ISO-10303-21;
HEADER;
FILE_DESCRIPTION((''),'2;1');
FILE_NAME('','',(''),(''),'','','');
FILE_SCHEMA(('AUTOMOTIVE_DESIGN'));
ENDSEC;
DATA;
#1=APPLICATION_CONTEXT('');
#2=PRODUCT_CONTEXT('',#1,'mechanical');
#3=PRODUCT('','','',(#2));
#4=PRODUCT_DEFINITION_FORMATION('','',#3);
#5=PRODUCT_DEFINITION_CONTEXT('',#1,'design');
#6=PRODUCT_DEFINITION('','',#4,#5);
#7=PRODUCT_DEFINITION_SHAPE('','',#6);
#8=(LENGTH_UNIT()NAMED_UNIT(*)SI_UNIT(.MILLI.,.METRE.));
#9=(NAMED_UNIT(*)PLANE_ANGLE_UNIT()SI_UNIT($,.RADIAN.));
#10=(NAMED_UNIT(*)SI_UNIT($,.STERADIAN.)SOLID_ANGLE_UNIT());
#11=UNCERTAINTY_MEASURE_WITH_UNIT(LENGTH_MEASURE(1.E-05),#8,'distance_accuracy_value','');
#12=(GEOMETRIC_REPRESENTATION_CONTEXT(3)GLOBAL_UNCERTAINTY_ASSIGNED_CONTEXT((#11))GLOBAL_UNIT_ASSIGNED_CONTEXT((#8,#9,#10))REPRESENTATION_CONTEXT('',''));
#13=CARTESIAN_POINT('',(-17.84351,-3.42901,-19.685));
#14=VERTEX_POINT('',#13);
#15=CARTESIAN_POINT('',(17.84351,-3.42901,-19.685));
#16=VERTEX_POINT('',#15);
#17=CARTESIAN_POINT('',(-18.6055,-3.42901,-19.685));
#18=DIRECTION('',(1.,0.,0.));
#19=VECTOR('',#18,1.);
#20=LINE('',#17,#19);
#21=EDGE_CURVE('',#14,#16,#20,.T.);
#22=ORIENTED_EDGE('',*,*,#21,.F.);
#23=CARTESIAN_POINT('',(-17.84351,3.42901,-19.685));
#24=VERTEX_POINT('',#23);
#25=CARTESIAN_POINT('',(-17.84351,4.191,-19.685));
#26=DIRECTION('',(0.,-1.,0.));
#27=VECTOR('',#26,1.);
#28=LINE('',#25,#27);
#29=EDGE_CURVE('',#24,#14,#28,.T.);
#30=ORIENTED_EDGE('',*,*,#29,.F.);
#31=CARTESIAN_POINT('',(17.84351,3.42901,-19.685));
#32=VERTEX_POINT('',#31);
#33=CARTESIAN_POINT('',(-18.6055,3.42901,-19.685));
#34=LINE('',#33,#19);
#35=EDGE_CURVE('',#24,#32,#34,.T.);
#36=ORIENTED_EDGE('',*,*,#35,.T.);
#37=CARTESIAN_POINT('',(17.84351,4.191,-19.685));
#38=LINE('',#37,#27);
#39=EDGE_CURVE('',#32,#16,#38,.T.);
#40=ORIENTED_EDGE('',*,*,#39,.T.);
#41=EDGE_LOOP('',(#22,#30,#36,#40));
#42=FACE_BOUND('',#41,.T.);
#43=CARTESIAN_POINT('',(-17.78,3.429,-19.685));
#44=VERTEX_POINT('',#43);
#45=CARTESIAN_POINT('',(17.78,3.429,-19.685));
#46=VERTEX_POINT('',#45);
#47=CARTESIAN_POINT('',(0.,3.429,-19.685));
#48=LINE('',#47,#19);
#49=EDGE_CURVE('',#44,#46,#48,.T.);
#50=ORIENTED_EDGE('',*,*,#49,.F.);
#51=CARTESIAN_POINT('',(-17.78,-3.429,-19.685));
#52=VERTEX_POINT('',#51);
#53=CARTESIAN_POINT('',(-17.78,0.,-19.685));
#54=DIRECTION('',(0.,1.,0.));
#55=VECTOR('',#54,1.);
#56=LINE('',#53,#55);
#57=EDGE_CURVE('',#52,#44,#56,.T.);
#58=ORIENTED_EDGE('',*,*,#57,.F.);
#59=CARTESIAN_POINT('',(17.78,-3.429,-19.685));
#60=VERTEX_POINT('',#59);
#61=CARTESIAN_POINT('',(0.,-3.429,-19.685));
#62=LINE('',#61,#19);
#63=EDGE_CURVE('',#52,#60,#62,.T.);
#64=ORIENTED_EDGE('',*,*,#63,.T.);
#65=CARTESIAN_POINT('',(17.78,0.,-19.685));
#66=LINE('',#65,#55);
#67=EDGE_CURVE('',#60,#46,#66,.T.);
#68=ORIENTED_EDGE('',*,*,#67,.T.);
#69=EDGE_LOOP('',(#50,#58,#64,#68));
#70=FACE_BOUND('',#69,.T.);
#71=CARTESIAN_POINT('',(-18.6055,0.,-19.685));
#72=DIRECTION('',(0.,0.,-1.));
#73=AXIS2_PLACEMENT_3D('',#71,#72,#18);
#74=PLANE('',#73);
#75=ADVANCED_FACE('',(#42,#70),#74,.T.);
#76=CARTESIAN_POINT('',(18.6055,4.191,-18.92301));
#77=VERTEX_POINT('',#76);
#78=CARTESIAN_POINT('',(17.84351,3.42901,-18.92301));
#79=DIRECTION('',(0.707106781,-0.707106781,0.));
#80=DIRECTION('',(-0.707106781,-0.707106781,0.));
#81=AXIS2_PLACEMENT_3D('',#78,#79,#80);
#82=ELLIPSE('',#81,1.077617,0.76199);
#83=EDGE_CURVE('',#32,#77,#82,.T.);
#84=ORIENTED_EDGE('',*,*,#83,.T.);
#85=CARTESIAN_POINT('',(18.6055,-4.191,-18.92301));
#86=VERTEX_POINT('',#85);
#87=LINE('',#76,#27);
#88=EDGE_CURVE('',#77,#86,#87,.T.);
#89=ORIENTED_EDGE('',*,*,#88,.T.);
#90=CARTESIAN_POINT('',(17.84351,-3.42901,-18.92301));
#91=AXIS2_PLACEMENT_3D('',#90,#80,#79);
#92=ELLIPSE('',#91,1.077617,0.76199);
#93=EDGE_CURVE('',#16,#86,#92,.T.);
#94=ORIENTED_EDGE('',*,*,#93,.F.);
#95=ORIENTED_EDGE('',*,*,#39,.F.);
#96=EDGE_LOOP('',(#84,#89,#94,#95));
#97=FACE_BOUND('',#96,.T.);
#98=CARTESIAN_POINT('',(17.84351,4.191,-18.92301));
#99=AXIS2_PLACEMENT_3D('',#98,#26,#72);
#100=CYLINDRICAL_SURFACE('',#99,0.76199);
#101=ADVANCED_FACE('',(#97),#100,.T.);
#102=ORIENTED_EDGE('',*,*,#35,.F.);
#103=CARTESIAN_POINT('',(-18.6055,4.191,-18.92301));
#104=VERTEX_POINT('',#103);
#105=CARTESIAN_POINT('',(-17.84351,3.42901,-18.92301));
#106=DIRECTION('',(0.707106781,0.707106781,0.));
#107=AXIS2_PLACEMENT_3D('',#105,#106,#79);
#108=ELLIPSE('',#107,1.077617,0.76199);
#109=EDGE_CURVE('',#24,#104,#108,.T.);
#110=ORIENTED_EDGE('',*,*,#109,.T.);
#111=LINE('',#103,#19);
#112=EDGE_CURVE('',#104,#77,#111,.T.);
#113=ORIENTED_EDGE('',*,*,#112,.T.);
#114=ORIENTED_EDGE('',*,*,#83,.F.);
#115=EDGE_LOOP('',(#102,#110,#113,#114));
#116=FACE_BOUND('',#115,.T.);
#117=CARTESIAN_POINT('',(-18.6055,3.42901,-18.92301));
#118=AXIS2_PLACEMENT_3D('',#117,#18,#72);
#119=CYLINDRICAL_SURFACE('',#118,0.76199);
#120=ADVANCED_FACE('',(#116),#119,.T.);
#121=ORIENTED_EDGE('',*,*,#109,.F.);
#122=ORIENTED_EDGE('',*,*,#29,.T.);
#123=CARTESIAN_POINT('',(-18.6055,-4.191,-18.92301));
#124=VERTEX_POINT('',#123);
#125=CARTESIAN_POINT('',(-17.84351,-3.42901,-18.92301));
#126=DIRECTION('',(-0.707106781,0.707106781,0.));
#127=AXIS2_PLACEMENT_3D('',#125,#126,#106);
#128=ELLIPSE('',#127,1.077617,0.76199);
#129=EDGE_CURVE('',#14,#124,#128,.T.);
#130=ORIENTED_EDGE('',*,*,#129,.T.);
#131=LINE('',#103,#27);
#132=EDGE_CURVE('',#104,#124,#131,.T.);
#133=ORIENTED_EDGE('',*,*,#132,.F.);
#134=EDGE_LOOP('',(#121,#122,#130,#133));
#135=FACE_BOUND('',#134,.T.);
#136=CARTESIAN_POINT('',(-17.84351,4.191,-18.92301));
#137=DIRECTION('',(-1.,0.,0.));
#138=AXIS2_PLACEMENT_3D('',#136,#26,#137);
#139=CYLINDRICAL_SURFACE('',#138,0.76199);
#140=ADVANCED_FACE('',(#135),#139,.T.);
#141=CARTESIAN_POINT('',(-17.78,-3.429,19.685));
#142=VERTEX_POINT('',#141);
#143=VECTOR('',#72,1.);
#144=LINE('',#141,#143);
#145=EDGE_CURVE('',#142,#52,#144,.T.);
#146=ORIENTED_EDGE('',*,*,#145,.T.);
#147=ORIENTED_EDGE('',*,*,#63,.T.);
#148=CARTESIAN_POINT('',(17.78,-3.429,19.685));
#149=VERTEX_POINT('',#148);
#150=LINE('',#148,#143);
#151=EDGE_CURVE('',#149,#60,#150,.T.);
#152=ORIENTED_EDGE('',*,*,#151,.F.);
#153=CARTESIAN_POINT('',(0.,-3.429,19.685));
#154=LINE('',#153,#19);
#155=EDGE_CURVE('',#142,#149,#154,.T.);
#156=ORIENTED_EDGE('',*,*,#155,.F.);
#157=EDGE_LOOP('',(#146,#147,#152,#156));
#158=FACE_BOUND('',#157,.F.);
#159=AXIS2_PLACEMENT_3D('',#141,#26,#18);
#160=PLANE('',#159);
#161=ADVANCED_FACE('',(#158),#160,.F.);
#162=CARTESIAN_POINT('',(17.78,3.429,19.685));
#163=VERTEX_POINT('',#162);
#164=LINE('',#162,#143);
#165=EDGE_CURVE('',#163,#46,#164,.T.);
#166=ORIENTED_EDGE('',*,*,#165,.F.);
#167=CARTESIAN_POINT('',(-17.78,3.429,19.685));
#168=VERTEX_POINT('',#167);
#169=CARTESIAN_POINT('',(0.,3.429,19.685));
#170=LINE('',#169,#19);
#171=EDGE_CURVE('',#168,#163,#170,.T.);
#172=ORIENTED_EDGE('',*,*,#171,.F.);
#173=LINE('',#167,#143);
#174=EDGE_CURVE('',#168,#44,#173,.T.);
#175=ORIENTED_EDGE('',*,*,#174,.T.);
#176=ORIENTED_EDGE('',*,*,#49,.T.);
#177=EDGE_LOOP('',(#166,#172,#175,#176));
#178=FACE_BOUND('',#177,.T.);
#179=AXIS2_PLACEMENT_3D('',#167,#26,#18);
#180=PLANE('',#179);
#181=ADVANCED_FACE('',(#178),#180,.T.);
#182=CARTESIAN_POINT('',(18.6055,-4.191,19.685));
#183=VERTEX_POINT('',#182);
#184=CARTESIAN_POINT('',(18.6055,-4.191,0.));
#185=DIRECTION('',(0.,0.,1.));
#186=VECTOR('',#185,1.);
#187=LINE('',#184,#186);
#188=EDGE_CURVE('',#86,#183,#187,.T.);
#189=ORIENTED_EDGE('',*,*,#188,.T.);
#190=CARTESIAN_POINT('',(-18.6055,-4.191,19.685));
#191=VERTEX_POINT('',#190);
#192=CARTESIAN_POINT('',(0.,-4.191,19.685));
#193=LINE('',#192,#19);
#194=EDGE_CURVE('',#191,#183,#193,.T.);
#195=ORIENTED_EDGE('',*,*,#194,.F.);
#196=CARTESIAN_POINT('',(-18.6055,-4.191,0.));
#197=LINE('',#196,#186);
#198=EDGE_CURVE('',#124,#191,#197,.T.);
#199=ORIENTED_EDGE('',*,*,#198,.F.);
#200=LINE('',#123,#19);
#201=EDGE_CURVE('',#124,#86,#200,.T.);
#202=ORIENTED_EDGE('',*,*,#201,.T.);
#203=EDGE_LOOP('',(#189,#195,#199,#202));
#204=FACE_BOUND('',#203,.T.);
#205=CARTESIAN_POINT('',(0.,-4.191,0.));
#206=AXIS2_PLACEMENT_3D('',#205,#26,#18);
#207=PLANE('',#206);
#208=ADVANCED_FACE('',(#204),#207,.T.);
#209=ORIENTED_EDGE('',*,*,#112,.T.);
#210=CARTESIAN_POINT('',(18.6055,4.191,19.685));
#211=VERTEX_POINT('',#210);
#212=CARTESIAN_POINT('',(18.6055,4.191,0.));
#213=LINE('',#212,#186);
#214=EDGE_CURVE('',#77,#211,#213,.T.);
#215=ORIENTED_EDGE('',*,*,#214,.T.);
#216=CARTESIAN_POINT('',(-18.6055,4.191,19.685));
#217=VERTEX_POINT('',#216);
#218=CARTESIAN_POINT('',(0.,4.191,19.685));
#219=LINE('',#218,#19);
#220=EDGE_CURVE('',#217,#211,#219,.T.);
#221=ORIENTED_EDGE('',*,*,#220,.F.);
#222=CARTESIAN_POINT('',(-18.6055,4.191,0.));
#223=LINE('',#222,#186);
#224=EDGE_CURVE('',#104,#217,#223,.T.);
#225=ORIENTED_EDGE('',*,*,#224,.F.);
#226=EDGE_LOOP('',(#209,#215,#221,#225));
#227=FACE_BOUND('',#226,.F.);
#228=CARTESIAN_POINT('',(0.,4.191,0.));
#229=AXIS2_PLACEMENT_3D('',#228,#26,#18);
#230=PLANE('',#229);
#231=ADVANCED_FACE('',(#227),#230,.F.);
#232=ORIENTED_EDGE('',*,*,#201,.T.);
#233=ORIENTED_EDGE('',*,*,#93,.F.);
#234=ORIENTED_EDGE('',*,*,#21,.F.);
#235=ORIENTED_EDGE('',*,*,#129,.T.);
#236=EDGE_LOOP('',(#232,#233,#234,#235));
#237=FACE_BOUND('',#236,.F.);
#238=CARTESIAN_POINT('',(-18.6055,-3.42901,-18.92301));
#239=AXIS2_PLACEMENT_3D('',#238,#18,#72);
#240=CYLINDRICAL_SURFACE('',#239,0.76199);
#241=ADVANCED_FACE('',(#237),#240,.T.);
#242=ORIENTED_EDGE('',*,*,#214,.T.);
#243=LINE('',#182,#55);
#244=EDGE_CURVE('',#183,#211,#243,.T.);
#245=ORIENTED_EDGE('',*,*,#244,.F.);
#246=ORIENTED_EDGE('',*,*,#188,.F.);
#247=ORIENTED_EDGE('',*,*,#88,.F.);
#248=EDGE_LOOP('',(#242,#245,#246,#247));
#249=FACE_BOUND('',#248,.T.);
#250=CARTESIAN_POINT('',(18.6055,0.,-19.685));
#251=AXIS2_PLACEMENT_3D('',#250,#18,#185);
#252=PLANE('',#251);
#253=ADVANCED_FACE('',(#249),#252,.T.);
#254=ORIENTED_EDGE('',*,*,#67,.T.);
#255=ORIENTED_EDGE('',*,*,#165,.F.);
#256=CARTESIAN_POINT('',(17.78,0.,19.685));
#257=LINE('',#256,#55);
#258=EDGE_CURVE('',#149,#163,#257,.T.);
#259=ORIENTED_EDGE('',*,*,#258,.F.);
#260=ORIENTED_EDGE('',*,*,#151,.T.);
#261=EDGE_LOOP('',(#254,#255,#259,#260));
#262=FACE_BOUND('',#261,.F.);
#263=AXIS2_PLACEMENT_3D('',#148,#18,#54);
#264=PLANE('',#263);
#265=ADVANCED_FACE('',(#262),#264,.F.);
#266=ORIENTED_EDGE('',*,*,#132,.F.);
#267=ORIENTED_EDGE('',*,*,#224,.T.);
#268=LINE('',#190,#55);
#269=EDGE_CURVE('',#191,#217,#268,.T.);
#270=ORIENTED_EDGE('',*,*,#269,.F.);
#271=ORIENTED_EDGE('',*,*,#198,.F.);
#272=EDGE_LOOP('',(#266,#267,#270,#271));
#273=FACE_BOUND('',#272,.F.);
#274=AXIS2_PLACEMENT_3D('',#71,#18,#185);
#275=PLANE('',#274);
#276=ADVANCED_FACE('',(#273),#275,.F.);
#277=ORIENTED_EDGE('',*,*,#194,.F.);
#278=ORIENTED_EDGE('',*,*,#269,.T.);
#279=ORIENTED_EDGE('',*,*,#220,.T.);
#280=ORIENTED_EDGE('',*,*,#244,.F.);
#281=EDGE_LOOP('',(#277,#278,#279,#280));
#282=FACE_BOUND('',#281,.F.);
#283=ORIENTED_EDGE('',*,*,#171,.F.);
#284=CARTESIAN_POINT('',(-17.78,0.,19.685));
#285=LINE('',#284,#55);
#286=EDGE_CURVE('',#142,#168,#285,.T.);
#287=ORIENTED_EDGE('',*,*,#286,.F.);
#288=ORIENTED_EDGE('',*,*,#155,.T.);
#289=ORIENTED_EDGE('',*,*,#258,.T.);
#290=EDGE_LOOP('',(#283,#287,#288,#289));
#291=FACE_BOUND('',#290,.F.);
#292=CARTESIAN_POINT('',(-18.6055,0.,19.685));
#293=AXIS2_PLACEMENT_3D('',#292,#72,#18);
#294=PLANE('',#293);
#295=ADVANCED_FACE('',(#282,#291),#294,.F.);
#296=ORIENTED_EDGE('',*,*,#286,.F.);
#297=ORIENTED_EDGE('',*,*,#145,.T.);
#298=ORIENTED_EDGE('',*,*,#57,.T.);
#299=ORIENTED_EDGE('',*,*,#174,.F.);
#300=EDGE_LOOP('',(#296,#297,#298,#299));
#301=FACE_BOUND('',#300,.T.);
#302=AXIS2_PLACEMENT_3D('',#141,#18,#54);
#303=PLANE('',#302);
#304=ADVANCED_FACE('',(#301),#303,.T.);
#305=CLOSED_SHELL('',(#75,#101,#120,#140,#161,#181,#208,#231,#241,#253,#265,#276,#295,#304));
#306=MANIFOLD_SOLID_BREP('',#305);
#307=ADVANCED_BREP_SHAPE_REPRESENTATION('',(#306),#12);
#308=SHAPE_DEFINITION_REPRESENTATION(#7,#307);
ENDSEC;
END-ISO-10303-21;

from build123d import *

# Parameters (mm, degrees)
F0_W     = 37.211
F0_H     = 39.37
F1_DEPTH = 4.191
F2_W     = 35.56
F2_H     = 6.858
F3_DEPTH = 39.37
F4_R     = 0.76199


# Not quite as in the source:
# - a fillet or chamfer is up to 0.001 mm smaller than in the source, because OpenCascade refuses the exact size


with BuildPart() as f1:
    # F0 (on Front) → F1 (new body, symmetric)
    with BuildSketch(Plane.XZ):
        Rectangle(F0_W, F0_H)
    extrude(amount=F1_DEPTH, both=True)

    # F2 (on face) → F3 (cut)
    with BuildSketch(Plane.XY.offset(19.685)):
        Rectangle(F2_W, F2_H)
    extrude(amount=-F3_DEPTH, mode=Mode.SUBTRACT)

    # F4 (radius 0.762 in the source; OpenCascade refuses exactly that, so slightly less here)
    f4_edges = [f1.edges().sort_by_distance(p)[0] for p in [
        (0, -4.191, -19.685),
        (18.6055, 0, -19.685),
        (0, 4.191, -19.685),
        (-18.6055, 0, -19.685),
    ]]
    fillet(f4_edges, radius=F4_R)


solid = f1.part
